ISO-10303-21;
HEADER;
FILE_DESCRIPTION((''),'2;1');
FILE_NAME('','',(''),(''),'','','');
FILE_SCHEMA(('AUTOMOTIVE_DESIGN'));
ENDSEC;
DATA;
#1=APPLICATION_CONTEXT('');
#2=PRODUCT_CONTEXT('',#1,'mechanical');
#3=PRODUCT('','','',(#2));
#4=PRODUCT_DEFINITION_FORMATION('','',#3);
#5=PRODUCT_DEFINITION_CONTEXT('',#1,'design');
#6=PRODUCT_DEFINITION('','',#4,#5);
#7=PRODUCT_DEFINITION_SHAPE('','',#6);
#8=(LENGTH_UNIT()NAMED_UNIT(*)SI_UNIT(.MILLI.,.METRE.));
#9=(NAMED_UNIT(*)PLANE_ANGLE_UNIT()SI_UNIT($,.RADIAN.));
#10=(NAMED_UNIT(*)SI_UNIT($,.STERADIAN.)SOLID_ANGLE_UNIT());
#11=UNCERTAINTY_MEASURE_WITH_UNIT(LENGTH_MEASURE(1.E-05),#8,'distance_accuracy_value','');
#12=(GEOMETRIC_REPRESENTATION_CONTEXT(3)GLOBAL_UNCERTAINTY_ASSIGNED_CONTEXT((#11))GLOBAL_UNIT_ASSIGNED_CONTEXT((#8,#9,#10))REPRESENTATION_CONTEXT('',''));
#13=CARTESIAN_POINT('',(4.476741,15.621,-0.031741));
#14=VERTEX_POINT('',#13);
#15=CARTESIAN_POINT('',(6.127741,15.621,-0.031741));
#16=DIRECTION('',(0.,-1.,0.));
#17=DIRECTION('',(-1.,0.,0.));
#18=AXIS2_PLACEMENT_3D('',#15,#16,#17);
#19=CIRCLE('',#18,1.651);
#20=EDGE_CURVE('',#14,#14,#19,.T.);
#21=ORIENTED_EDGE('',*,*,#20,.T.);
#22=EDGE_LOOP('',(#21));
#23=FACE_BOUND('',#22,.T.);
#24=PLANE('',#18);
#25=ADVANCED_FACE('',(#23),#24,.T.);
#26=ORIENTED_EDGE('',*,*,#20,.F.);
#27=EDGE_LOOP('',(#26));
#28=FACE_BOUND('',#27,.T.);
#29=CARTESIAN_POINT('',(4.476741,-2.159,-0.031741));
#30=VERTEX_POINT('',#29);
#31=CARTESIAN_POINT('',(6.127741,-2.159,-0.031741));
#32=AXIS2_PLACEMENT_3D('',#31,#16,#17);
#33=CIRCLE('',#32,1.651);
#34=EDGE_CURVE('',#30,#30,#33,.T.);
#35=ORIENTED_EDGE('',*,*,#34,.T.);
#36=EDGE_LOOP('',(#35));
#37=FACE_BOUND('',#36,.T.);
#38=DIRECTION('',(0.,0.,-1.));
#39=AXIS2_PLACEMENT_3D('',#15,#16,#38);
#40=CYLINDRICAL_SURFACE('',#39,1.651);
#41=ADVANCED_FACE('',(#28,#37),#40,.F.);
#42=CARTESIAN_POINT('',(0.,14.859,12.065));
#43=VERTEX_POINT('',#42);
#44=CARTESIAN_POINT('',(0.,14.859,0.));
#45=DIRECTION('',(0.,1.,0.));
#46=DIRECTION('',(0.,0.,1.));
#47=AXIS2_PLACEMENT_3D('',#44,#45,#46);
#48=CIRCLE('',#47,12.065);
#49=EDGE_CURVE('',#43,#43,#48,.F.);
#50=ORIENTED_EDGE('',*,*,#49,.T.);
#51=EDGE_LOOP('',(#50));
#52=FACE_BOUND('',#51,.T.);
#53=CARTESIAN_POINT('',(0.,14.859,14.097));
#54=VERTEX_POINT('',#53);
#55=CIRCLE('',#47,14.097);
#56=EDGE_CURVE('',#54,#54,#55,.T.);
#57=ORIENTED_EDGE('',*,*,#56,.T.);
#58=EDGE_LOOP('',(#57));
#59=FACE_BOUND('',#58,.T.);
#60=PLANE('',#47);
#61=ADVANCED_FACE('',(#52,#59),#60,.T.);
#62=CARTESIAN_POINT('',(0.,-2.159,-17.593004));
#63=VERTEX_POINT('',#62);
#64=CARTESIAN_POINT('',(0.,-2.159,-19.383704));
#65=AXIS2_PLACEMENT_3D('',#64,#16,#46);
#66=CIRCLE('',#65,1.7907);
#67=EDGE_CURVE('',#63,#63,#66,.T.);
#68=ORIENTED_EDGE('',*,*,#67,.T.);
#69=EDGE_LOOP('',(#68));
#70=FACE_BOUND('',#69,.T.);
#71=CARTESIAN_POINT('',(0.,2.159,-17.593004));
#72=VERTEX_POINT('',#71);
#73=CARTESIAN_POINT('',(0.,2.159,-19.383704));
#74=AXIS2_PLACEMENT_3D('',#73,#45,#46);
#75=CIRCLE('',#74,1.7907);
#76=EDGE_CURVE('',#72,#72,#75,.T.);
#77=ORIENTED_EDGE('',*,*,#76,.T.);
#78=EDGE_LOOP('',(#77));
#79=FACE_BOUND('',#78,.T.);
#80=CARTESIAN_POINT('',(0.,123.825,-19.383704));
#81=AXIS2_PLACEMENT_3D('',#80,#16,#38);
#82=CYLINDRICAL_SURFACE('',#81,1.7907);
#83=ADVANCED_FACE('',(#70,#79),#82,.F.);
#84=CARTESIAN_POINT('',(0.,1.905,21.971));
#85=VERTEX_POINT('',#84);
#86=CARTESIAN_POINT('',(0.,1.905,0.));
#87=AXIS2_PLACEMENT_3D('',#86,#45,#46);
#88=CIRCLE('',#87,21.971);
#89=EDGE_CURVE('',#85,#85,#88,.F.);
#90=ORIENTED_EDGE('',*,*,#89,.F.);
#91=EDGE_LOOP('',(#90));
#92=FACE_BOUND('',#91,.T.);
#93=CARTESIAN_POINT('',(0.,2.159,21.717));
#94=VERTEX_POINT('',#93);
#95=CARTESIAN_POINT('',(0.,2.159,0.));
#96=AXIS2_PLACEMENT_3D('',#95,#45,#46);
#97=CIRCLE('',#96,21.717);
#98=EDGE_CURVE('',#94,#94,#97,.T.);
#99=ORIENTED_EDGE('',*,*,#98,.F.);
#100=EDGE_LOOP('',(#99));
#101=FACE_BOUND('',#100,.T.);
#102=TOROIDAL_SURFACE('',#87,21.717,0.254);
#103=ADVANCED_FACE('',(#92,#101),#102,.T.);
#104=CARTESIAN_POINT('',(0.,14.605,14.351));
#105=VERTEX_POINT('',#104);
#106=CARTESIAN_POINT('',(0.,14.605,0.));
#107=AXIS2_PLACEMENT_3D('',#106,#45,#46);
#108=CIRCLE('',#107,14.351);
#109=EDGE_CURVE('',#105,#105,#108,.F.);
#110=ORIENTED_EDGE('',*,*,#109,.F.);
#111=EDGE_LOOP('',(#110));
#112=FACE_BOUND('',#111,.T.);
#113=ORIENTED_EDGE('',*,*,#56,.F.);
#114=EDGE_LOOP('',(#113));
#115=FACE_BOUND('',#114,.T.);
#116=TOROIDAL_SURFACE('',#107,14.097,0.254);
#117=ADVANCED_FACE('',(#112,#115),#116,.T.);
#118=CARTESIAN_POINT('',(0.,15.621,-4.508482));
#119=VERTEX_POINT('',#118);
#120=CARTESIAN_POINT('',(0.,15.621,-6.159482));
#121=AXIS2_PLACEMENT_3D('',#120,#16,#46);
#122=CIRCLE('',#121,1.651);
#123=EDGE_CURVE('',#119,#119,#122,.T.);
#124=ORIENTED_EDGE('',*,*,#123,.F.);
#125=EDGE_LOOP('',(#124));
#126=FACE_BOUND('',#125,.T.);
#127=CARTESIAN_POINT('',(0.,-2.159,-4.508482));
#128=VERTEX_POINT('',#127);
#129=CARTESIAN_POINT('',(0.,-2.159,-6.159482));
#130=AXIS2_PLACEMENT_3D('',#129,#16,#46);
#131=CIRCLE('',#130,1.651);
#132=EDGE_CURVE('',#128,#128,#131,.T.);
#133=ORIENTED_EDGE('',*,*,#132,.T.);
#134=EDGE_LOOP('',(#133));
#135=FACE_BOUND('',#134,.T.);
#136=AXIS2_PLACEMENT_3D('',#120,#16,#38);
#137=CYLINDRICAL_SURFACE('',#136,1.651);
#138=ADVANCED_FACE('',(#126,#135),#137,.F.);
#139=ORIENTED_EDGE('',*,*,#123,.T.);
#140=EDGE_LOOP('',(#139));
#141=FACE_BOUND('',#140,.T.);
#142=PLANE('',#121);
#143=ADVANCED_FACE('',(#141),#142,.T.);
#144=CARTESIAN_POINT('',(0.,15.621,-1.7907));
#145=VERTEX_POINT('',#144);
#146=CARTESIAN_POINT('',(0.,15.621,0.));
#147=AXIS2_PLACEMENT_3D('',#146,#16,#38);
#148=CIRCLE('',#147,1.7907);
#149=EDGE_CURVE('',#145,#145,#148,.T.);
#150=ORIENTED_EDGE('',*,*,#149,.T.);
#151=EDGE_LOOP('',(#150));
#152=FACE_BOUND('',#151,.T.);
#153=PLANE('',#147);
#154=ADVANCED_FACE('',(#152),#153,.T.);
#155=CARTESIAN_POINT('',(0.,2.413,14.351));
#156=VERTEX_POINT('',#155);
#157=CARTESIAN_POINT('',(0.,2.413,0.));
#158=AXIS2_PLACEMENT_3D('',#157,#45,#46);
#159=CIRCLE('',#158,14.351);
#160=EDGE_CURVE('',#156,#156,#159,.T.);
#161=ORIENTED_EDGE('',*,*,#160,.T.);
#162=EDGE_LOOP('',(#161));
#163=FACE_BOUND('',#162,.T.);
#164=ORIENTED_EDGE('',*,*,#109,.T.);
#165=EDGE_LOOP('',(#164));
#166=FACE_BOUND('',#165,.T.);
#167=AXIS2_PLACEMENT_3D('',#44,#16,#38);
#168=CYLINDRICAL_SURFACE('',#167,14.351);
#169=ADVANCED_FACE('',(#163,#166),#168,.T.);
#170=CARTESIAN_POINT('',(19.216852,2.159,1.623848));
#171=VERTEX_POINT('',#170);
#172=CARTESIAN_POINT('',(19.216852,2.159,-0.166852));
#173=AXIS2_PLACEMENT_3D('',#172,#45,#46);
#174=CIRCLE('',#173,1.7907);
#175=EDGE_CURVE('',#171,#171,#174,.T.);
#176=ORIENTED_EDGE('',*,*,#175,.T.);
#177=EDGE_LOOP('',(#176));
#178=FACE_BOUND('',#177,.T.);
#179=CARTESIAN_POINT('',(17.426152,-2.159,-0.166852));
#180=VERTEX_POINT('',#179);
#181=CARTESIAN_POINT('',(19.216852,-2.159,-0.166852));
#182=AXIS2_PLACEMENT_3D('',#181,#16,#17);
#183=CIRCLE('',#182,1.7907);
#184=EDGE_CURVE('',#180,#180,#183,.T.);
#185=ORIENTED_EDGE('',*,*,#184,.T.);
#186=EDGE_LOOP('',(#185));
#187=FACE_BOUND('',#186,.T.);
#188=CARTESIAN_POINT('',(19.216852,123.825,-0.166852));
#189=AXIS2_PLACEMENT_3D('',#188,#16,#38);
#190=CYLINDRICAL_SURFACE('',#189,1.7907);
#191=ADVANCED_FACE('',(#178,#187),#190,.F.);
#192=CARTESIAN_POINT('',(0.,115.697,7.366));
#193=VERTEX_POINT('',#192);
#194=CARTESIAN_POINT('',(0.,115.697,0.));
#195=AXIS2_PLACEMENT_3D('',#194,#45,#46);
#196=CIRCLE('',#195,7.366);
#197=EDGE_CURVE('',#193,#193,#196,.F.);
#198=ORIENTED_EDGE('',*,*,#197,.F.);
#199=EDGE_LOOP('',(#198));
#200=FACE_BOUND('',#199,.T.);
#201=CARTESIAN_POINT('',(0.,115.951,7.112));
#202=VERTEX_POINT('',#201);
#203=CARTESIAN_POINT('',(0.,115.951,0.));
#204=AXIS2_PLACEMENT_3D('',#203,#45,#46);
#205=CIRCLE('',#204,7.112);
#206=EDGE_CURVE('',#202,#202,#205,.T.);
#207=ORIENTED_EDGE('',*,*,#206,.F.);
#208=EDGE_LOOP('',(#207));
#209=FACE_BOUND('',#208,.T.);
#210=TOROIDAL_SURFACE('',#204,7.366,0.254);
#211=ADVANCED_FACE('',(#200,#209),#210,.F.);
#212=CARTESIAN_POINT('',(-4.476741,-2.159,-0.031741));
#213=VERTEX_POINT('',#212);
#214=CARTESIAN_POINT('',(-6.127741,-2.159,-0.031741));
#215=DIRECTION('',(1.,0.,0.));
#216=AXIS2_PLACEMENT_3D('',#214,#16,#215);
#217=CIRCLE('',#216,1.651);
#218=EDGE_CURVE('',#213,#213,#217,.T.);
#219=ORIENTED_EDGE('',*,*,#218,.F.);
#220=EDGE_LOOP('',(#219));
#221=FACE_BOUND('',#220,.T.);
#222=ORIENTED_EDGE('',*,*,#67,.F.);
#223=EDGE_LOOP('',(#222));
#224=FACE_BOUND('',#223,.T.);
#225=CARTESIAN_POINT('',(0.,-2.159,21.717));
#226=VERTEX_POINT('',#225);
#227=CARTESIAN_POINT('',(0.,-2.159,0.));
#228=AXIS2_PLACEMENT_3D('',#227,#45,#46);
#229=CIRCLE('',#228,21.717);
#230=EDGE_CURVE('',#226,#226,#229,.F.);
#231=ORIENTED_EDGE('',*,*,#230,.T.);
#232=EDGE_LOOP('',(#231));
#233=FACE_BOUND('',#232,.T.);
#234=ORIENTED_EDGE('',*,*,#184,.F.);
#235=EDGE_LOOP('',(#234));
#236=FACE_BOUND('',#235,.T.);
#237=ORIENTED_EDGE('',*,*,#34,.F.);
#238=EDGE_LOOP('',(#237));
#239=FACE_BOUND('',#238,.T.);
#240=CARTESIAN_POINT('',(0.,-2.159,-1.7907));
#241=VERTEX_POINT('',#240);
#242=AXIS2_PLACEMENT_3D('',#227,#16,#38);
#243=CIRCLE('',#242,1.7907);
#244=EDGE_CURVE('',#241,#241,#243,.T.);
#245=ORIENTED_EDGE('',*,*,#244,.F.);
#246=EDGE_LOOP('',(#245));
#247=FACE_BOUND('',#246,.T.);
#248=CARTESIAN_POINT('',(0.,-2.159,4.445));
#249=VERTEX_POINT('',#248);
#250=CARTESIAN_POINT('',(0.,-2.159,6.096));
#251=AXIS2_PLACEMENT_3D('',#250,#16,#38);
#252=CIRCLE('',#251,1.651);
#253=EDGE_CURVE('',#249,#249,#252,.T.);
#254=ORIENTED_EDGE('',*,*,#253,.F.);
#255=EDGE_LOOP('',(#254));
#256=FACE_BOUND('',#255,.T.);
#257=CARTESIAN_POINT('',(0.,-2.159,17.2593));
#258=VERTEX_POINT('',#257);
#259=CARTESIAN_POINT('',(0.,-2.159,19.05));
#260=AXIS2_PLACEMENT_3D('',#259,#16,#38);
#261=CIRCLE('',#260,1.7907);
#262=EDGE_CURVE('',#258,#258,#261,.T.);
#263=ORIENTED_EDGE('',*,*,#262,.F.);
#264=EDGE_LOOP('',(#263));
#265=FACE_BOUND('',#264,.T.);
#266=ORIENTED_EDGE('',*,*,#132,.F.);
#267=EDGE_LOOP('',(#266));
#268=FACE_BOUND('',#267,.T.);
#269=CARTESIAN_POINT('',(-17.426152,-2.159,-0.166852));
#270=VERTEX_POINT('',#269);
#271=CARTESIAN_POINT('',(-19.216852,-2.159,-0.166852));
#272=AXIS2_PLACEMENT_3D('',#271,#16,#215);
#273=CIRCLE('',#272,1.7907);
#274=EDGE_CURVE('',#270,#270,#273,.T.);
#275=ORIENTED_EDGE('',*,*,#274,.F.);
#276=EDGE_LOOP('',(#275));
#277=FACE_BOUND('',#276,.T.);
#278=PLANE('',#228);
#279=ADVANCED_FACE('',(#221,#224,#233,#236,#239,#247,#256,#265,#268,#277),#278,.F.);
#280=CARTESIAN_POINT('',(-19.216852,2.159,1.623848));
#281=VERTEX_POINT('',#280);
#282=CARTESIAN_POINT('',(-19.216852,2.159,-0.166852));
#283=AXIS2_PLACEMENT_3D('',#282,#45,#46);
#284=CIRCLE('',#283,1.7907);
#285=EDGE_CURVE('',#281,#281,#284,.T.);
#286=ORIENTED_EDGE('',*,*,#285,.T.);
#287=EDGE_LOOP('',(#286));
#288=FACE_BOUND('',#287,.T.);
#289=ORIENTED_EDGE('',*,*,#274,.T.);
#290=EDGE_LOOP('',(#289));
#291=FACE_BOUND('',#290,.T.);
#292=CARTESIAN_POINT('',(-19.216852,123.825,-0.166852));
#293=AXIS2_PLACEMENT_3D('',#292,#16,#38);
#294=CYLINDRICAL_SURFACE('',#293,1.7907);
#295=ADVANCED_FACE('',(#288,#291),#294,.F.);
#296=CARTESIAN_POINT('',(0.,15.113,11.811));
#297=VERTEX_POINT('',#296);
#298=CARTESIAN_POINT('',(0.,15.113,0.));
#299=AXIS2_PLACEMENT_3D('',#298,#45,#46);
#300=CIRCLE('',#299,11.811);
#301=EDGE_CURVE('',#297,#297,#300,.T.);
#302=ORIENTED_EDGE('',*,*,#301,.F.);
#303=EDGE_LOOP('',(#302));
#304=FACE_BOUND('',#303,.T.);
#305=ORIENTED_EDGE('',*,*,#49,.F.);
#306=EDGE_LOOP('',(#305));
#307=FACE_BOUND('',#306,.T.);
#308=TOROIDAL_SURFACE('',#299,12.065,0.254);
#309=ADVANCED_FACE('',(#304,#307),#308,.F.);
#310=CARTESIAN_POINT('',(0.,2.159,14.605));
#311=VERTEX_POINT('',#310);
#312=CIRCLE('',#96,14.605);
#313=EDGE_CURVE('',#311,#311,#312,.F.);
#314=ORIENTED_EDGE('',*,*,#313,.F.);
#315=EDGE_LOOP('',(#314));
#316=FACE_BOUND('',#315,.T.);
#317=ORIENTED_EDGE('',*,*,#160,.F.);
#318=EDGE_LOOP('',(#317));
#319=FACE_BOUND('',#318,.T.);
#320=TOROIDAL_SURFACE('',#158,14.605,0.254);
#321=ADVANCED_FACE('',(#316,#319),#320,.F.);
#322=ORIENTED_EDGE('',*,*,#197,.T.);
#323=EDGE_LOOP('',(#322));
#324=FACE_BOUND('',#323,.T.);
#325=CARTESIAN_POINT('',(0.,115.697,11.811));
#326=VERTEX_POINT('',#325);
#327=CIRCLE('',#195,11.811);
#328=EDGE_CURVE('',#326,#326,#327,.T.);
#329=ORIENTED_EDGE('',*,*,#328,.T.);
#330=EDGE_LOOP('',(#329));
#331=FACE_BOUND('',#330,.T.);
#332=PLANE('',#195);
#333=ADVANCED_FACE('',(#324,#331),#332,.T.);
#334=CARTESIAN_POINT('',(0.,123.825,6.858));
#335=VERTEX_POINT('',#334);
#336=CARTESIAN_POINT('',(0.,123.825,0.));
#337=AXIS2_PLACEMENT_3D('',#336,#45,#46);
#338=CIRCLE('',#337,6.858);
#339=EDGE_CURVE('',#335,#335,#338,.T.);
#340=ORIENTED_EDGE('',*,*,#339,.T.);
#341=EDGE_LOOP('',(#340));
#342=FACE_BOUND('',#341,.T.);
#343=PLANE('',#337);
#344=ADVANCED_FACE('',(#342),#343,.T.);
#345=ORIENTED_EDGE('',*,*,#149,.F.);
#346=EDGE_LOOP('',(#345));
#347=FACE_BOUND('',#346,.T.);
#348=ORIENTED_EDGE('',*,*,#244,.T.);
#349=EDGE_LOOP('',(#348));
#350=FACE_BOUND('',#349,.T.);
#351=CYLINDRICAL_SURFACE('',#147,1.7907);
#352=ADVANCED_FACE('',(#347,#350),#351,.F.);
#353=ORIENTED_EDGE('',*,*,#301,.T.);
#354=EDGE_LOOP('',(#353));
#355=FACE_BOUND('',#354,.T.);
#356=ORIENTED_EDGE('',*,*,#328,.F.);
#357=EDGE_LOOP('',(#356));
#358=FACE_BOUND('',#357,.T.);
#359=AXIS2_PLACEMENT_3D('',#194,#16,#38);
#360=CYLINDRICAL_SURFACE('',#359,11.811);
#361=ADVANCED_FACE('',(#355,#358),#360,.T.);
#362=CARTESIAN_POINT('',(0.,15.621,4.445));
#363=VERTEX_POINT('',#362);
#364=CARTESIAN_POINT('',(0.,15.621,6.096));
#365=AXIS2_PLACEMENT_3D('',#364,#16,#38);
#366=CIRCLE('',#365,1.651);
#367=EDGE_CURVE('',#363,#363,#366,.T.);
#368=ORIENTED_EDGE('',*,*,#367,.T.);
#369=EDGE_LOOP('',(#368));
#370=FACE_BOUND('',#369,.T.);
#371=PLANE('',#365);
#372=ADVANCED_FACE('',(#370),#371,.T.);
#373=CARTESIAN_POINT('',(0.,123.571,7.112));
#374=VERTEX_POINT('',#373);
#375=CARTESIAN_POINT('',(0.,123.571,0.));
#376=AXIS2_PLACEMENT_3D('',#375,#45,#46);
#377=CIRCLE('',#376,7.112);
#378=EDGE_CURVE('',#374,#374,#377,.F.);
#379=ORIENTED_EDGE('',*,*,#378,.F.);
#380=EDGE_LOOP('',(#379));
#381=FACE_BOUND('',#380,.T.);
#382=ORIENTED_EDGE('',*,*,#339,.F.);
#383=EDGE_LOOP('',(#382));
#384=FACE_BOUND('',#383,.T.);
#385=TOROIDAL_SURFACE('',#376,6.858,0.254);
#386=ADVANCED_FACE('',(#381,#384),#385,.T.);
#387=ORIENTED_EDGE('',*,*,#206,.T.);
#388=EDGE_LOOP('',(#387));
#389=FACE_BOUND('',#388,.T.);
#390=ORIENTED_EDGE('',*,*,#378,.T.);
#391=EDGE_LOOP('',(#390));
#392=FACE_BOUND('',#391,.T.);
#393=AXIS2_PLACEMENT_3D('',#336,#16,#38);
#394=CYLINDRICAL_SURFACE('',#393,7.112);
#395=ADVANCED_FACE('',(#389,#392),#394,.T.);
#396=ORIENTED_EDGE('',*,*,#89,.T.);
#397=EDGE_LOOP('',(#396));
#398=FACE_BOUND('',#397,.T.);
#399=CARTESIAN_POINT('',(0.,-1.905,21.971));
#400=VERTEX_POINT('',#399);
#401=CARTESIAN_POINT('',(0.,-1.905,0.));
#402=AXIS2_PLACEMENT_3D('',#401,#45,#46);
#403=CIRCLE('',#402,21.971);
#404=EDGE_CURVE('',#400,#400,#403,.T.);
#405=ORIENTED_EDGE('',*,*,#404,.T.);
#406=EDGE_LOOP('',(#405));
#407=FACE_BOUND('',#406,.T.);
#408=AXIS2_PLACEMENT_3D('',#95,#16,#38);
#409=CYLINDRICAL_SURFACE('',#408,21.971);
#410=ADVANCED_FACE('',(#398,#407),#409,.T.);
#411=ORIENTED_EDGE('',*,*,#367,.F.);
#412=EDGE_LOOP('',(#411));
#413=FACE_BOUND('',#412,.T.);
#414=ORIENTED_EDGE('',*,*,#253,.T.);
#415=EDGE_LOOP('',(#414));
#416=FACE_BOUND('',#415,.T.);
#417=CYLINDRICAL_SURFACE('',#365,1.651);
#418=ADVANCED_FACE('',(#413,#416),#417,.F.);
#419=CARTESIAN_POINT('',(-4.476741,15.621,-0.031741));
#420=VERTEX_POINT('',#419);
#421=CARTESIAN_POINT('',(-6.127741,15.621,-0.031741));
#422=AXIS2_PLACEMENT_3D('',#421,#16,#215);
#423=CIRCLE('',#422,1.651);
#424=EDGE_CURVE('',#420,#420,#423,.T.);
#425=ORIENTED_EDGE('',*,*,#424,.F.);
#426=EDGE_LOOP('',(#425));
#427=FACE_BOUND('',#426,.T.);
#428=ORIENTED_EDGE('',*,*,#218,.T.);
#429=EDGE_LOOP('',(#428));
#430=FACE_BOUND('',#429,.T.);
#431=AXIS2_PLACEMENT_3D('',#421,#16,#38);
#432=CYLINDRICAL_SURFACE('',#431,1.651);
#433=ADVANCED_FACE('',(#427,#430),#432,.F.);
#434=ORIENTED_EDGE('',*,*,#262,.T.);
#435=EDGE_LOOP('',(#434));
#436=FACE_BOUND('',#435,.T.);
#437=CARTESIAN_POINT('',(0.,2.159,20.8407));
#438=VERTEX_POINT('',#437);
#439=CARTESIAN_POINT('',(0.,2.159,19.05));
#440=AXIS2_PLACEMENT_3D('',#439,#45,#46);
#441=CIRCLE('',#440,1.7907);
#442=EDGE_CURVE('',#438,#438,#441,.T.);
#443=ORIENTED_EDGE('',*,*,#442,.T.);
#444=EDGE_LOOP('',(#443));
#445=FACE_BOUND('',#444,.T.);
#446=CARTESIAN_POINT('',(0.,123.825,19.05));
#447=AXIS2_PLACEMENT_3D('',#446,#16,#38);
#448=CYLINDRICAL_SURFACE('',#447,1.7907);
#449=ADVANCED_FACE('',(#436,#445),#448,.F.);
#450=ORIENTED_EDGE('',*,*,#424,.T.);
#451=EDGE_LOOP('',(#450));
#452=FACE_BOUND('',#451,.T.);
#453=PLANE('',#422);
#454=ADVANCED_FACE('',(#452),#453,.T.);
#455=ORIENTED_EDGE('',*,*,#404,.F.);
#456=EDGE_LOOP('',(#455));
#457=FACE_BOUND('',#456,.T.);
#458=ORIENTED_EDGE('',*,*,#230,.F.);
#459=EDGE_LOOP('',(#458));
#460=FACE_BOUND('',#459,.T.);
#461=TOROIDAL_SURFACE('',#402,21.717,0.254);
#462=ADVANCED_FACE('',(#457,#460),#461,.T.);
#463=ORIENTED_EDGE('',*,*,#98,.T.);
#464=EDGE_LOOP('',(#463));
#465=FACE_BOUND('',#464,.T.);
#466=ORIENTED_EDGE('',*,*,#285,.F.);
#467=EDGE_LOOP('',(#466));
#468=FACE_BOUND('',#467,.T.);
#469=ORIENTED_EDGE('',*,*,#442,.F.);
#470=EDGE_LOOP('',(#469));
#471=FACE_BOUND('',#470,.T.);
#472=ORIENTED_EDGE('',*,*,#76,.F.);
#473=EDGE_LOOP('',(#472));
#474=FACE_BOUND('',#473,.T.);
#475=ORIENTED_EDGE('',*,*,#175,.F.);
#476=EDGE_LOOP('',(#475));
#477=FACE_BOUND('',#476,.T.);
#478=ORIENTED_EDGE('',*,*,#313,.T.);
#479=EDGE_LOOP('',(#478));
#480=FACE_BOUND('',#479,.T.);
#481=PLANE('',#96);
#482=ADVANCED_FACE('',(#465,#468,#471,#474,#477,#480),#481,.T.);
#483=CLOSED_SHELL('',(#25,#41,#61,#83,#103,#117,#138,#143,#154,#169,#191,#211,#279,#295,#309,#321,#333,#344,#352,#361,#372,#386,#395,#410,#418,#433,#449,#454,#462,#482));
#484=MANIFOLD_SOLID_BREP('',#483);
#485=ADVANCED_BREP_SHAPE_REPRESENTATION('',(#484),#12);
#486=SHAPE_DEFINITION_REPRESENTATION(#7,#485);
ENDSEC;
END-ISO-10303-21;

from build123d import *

# Parameters (mm, degrees)
SKETCH2_R               = 21.971
BOSS_EXTRUDE1_DEPTH     = 2.159
SKETCH3_R               = 14.351
BOSS_EXTRUDE2_DEPTH     = 12.7
SKETCH4_R               = 11.811
BOSS_EXTRUDE3_DEPTH     = 100.838
SKETCH5_R               = 7.112
BOSS_EXTRUDE4_DEPTH     = 8.128
FILLET1_R               = 0.254
SKETCH6_R               = 1.7907
CUT_EXTRUDE2_DEPTH      = 130.759076532
SKETCH6_4_R             = 1.651
CUT_EXTRUDE3_DEPTH      = 17.78
CIRPATTERN2_START       = -2.159
CIRPATTERN2_OUTLINE_R   = 1.7907
CIRPATTERN2_OUTLINE_R_2 = 1.651
CIRPATTERN2_DEPTH       = 17.78
SKETCH8_R               = 1.7907
CUT_EXTRUDE4_DEPTH      = 17.78


# Read off the part's stored shape, not the designer's step: CirPattern2
with BuildPart() as part:
    # Sketch2 → Boss-Extrude1 (new, symmetric)
    with BuildSketch(Plane(origin=(0, 0, 0), x_dir=(1, 0, 0), z_dir=(0, 1, 0))):
        with Locations(Location((0, 0, 0), (0, 0, 270))):
            Circle(SKETCH2_R)
    extrude(amount=BOSS_EXTRUDE1_DEPTH, both=True)

    # Sketch3 → Boss-Extrude2 (add)
    with BuildSketch(Plane(origin=(0, 2.159, 0), x_dir=(1, 0, 0), z_dir=(0, 1, 0))):
        with Locations(Location((0, 0, 0), (0, 0, 270))):
            Circle(SKETCH3_R)
    extrude(amount=BOSS_EXTRUDE2_DEPTH)

    # Sketch4 → Boss-Extrude3 (add)
    with BuildSketch(Plane(origin=(0, 14.859, 0), x_dir=(1, 0, 0), z_dir=(0, 1, 0))):
        with Locations(Location((0, 0, 0), (0, 0, 270))):
            Circle(SKETCH4_R)
    extrude(amount=BOSS_EXTRUDE3_DEPTH)

    # Sketch5 → Boss-Extrude4 (add)
    with BuildSketch(Plane(origin=(0, 115.697, 0), x_dir=(1, 0, 0), z_dir=(0, 1, 0))):
        with Locations(Location((0, 0, 0), (0, 0, 270))):
            Circle(SKETCH5_R)
    extrude(amount=BOSS_EXTRUDE4_DEPTH)

    # Fillet1
    fillet1_edges = [part.edges().sort_by_distance(p)[0] for p in [
        (0, 14.859, -11.811),
        (0, 115.697, -7.112),
        (0, 123.825, -7.112),
        (0, -2.159, -21.971),
        (0, 2.159, -21.971),
        (0, 2.159, -14.351),
        (0, 14.859, -14.351),
    ]]
    fillet(fillet1_edges, radius=FILLET1_R)

    # Sketch6 → Cut-Extrude2 (cut, through all)
    with BuildSketch(Plane.XZ.offset(2.159)):
        with Locations(Location((0, 19.05, 0), (0, 0, 270))):
            Circle(SKETCH6_R)
    extrude(amount=-CUT_EXTRUDE2_DEPTH, mode=Mode.SUBTRACT)

    # Sketch6<4> → Cut-Extrude3 (cut)
    with BuildSketch(Plane.XZ.offset(2.159)):
        with Locations(Location((0, 6.096, 0), (0, 0, 270))):
            Circle(SKETCH6_4_R)
    extrude(amount=-CUT_EXTRUDE3_DEPTH, mode=Mode.SUBTRACT)

    # CirPattern2 outline → CirPattern2 (cut)
    with BuildSketch(Plane(origin=(0, 0, 0), x_dir=(1, 0, 0), z_dir=(0, 1, 0)).offset(CIRPATTERN2_START)):
        with Locations((19.216852173, 0.166852173)):
            Circle(CIRPATTERN2_OUTLINE_R)
        with Locations((0, 19.383704346)):
            Circle(CIRPATTERN2_OUTLINE_R)
        with Locations((-19.216852173, 0.166852173)):
            Circle(CIRPATTERN2_OUTLINE_R)
        with Locations((6.127741136, 0.031741136)):
            Circle(CIRPATTERN2_OUTLINE_R_2)
        with Locations((0, 6.159482272)):
            Circle(CIRPATTERN2_OUTLINE_R_2)
        with Locations((-6.127741136, 0.031741136)):
            Circle(CIRPATTERN2_OUTLINE_R_2)
    extrude(amount=CIRPATTERN2_DEPTH, mode=Mode.SUBTRACT)

    # Sketch8 → Cut-Extrude4 (cut)
    with BuildSketch(Plane.XZ.offset(2.159)):
        with Locations(Location((0, 0, 0), (0, 0, 270))):
            Circle(SKETCH8_R)
    extrude(amount=-CUT_EXTRUDE4_DEPTH, mode=Mode.SUBTRACT)


solid = part.part
